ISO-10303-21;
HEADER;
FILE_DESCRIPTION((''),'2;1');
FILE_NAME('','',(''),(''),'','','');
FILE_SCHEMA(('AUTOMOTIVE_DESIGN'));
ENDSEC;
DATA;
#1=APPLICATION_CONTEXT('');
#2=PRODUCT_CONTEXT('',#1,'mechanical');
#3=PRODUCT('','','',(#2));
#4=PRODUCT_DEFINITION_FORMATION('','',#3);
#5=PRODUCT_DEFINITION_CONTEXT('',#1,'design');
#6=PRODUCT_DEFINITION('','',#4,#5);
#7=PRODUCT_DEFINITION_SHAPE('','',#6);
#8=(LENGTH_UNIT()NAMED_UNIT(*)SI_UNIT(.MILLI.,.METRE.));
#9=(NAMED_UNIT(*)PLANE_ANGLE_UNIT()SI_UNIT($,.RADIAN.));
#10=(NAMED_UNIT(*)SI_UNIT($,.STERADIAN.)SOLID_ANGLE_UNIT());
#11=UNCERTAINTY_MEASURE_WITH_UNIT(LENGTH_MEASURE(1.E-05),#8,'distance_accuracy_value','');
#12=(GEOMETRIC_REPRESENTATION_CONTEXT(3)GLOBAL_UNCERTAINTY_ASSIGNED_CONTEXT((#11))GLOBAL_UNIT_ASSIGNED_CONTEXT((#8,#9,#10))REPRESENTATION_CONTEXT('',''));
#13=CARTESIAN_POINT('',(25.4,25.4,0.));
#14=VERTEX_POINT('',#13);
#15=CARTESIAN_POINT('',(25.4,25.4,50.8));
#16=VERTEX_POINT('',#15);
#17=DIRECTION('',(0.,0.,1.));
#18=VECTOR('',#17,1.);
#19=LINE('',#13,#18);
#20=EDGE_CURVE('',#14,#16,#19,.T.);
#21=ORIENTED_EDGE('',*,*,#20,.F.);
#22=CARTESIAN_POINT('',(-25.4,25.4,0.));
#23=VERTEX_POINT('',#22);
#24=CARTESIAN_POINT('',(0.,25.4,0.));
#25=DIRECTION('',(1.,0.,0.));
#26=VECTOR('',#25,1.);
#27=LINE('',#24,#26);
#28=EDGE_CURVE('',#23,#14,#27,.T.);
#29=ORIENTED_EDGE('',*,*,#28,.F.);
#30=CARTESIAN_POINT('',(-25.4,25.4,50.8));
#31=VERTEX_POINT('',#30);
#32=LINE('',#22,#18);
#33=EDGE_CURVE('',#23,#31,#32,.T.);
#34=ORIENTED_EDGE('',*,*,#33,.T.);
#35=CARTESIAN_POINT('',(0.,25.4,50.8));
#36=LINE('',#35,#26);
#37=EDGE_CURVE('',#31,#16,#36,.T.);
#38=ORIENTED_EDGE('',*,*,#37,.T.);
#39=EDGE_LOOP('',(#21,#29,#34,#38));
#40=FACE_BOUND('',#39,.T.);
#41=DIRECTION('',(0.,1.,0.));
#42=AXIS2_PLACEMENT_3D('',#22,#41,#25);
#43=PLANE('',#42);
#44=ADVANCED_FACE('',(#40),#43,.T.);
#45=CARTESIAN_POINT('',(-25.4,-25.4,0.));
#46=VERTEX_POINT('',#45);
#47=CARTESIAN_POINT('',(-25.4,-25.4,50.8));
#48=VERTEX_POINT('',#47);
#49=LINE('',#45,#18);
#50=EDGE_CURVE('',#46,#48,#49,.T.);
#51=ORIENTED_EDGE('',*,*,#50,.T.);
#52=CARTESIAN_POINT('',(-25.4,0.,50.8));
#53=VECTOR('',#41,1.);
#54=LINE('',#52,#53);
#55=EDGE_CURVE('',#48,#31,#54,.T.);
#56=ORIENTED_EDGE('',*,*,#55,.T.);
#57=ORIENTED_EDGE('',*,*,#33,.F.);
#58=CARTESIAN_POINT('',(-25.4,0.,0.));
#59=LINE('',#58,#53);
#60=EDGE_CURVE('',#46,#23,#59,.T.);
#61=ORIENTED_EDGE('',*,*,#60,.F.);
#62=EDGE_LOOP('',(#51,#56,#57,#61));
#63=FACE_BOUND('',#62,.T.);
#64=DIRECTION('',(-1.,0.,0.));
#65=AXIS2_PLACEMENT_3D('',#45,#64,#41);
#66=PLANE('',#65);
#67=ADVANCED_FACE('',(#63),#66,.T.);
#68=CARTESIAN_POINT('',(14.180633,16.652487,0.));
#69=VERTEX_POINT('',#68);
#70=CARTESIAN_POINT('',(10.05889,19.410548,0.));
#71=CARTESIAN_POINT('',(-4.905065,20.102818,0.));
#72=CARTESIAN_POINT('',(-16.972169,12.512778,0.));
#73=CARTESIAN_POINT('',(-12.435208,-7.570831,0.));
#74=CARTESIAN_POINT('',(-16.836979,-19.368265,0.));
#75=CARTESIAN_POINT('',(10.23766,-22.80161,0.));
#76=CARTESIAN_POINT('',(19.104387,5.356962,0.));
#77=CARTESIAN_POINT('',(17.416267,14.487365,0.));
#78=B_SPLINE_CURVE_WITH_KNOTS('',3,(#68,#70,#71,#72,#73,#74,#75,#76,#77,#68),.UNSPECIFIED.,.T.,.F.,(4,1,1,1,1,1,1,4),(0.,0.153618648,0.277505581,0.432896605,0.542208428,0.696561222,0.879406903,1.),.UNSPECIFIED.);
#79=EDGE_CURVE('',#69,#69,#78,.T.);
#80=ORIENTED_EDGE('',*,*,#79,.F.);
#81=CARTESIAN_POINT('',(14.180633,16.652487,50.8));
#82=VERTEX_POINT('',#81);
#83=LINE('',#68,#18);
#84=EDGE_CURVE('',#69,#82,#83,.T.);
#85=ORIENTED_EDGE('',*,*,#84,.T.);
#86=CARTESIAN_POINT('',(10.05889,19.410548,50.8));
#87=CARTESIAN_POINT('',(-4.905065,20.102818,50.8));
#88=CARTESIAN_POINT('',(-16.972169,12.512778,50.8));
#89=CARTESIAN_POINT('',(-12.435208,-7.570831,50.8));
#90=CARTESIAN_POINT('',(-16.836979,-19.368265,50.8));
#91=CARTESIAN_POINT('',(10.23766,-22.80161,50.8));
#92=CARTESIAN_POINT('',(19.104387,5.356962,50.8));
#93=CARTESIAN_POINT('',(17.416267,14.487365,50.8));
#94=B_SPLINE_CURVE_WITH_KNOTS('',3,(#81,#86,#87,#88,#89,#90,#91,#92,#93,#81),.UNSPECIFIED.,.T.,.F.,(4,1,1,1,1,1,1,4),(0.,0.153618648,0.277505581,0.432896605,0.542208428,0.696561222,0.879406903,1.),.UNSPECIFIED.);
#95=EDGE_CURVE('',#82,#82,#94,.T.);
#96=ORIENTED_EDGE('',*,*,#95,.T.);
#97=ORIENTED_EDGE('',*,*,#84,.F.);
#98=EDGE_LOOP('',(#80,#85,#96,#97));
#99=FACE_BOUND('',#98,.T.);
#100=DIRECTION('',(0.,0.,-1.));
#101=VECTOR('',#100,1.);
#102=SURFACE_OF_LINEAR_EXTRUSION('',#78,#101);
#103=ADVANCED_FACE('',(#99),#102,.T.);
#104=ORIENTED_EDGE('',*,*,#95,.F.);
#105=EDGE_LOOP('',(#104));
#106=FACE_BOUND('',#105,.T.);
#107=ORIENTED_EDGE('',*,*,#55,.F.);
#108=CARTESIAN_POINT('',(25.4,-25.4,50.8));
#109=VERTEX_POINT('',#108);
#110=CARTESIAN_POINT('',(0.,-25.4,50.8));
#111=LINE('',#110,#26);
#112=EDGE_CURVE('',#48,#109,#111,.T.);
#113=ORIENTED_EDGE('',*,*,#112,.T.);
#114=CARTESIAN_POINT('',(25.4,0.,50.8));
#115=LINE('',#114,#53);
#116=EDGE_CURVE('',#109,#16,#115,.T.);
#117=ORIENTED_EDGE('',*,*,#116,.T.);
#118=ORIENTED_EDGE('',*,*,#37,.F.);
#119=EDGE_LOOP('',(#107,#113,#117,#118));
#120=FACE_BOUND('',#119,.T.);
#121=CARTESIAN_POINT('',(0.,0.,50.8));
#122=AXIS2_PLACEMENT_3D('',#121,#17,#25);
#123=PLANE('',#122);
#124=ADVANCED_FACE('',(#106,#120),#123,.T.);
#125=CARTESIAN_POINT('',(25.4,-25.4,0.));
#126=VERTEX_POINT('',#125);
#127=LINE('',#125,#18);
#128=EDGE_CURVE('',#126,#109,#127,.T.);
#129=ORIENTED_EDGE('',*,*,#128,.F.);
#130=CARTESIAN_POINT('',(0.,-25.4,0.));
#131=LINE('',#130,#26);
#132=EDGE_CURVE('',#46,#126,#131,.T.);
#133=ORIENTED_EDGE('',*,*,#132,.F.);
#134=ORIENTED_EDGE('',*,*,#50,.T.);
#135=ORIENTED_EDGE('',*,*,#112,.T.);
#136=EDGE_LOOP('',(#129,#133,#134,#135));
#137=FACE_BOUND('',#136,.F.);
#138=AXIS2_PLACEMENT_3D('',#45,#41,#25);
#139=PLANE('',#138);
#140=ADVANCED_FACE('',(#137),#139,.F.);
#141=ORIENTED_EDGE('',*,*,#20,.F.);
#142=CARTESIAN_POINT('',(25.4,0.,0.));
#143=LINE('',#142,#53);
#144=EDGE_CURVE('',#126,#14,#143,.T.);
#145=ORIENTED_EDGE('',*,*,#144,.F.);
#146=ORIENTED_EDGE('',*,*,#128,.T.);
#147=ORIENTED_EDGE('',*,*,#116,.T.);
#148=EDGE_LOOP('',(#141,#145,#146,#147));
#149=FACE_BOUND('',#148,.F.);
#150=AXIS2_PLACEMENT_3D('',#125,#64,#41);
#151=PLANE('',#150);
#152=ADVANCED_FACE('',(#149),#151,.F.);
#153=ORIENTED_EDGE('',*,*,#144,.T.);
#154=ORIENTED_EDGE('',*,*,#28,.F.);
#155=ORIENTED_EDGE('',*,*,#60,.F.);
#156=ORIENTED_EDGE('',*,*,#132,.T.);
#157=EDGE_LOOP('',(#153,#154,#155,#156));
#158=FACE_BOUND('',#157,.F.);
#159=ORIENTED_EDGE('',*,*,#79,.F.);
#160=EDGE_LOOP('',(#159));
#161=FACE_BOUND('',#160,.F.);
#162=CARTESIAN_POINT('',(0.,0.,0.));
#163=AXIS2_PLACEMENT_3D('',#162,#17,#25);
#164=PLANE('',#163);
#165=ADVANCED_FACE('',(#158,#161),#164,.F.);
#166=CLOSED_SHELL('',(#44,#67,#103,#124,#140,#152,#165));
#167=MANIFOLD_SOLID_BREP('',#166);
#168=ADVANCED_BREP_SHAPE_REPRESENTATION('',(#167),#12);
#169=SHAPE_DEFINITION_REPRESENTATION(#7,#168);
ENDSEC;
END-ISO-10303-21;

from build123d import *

# Parameters (mm, degrees)
F0_W     = 50.8
F0_H     = 50.8
F1_DEPTH = 50.8


with BuildPart() as f1:
    # F0 (on Top) → F1 (new body)
    with BuildSketch(Plane.XY):
        Rectangle(F0_W, F0_H)
        with BuildLine():
            add(Edge.make_bspline(
                [(14.1806332394, 16.6524872184), (10.0588903346, 19.4105483099), (-4.9050652919, 20.1028182745), (-16.9721686636, 12.5127782489), (-12.4352083107, -7.5708311213), (-16.8369793115, -19.3682649355), (10.2376599564, -22.8016102522), (19.1043867853, 5.3569623238), (17.4162673699, 14.487365131), (14.1806332394, 16.6524872184)],
                knots=[0, 0, 0, 0, 0.1536186479, 0.2775055808, 0.432896605, 0.5422084282, 0.6965612221, 0.8794069034, 1, 1, 1, 1], degree=3))
        make_face(mode=Mode.SUBTRACT)
    extrude(amount=F1_DEPTH)


solid = f1.part
